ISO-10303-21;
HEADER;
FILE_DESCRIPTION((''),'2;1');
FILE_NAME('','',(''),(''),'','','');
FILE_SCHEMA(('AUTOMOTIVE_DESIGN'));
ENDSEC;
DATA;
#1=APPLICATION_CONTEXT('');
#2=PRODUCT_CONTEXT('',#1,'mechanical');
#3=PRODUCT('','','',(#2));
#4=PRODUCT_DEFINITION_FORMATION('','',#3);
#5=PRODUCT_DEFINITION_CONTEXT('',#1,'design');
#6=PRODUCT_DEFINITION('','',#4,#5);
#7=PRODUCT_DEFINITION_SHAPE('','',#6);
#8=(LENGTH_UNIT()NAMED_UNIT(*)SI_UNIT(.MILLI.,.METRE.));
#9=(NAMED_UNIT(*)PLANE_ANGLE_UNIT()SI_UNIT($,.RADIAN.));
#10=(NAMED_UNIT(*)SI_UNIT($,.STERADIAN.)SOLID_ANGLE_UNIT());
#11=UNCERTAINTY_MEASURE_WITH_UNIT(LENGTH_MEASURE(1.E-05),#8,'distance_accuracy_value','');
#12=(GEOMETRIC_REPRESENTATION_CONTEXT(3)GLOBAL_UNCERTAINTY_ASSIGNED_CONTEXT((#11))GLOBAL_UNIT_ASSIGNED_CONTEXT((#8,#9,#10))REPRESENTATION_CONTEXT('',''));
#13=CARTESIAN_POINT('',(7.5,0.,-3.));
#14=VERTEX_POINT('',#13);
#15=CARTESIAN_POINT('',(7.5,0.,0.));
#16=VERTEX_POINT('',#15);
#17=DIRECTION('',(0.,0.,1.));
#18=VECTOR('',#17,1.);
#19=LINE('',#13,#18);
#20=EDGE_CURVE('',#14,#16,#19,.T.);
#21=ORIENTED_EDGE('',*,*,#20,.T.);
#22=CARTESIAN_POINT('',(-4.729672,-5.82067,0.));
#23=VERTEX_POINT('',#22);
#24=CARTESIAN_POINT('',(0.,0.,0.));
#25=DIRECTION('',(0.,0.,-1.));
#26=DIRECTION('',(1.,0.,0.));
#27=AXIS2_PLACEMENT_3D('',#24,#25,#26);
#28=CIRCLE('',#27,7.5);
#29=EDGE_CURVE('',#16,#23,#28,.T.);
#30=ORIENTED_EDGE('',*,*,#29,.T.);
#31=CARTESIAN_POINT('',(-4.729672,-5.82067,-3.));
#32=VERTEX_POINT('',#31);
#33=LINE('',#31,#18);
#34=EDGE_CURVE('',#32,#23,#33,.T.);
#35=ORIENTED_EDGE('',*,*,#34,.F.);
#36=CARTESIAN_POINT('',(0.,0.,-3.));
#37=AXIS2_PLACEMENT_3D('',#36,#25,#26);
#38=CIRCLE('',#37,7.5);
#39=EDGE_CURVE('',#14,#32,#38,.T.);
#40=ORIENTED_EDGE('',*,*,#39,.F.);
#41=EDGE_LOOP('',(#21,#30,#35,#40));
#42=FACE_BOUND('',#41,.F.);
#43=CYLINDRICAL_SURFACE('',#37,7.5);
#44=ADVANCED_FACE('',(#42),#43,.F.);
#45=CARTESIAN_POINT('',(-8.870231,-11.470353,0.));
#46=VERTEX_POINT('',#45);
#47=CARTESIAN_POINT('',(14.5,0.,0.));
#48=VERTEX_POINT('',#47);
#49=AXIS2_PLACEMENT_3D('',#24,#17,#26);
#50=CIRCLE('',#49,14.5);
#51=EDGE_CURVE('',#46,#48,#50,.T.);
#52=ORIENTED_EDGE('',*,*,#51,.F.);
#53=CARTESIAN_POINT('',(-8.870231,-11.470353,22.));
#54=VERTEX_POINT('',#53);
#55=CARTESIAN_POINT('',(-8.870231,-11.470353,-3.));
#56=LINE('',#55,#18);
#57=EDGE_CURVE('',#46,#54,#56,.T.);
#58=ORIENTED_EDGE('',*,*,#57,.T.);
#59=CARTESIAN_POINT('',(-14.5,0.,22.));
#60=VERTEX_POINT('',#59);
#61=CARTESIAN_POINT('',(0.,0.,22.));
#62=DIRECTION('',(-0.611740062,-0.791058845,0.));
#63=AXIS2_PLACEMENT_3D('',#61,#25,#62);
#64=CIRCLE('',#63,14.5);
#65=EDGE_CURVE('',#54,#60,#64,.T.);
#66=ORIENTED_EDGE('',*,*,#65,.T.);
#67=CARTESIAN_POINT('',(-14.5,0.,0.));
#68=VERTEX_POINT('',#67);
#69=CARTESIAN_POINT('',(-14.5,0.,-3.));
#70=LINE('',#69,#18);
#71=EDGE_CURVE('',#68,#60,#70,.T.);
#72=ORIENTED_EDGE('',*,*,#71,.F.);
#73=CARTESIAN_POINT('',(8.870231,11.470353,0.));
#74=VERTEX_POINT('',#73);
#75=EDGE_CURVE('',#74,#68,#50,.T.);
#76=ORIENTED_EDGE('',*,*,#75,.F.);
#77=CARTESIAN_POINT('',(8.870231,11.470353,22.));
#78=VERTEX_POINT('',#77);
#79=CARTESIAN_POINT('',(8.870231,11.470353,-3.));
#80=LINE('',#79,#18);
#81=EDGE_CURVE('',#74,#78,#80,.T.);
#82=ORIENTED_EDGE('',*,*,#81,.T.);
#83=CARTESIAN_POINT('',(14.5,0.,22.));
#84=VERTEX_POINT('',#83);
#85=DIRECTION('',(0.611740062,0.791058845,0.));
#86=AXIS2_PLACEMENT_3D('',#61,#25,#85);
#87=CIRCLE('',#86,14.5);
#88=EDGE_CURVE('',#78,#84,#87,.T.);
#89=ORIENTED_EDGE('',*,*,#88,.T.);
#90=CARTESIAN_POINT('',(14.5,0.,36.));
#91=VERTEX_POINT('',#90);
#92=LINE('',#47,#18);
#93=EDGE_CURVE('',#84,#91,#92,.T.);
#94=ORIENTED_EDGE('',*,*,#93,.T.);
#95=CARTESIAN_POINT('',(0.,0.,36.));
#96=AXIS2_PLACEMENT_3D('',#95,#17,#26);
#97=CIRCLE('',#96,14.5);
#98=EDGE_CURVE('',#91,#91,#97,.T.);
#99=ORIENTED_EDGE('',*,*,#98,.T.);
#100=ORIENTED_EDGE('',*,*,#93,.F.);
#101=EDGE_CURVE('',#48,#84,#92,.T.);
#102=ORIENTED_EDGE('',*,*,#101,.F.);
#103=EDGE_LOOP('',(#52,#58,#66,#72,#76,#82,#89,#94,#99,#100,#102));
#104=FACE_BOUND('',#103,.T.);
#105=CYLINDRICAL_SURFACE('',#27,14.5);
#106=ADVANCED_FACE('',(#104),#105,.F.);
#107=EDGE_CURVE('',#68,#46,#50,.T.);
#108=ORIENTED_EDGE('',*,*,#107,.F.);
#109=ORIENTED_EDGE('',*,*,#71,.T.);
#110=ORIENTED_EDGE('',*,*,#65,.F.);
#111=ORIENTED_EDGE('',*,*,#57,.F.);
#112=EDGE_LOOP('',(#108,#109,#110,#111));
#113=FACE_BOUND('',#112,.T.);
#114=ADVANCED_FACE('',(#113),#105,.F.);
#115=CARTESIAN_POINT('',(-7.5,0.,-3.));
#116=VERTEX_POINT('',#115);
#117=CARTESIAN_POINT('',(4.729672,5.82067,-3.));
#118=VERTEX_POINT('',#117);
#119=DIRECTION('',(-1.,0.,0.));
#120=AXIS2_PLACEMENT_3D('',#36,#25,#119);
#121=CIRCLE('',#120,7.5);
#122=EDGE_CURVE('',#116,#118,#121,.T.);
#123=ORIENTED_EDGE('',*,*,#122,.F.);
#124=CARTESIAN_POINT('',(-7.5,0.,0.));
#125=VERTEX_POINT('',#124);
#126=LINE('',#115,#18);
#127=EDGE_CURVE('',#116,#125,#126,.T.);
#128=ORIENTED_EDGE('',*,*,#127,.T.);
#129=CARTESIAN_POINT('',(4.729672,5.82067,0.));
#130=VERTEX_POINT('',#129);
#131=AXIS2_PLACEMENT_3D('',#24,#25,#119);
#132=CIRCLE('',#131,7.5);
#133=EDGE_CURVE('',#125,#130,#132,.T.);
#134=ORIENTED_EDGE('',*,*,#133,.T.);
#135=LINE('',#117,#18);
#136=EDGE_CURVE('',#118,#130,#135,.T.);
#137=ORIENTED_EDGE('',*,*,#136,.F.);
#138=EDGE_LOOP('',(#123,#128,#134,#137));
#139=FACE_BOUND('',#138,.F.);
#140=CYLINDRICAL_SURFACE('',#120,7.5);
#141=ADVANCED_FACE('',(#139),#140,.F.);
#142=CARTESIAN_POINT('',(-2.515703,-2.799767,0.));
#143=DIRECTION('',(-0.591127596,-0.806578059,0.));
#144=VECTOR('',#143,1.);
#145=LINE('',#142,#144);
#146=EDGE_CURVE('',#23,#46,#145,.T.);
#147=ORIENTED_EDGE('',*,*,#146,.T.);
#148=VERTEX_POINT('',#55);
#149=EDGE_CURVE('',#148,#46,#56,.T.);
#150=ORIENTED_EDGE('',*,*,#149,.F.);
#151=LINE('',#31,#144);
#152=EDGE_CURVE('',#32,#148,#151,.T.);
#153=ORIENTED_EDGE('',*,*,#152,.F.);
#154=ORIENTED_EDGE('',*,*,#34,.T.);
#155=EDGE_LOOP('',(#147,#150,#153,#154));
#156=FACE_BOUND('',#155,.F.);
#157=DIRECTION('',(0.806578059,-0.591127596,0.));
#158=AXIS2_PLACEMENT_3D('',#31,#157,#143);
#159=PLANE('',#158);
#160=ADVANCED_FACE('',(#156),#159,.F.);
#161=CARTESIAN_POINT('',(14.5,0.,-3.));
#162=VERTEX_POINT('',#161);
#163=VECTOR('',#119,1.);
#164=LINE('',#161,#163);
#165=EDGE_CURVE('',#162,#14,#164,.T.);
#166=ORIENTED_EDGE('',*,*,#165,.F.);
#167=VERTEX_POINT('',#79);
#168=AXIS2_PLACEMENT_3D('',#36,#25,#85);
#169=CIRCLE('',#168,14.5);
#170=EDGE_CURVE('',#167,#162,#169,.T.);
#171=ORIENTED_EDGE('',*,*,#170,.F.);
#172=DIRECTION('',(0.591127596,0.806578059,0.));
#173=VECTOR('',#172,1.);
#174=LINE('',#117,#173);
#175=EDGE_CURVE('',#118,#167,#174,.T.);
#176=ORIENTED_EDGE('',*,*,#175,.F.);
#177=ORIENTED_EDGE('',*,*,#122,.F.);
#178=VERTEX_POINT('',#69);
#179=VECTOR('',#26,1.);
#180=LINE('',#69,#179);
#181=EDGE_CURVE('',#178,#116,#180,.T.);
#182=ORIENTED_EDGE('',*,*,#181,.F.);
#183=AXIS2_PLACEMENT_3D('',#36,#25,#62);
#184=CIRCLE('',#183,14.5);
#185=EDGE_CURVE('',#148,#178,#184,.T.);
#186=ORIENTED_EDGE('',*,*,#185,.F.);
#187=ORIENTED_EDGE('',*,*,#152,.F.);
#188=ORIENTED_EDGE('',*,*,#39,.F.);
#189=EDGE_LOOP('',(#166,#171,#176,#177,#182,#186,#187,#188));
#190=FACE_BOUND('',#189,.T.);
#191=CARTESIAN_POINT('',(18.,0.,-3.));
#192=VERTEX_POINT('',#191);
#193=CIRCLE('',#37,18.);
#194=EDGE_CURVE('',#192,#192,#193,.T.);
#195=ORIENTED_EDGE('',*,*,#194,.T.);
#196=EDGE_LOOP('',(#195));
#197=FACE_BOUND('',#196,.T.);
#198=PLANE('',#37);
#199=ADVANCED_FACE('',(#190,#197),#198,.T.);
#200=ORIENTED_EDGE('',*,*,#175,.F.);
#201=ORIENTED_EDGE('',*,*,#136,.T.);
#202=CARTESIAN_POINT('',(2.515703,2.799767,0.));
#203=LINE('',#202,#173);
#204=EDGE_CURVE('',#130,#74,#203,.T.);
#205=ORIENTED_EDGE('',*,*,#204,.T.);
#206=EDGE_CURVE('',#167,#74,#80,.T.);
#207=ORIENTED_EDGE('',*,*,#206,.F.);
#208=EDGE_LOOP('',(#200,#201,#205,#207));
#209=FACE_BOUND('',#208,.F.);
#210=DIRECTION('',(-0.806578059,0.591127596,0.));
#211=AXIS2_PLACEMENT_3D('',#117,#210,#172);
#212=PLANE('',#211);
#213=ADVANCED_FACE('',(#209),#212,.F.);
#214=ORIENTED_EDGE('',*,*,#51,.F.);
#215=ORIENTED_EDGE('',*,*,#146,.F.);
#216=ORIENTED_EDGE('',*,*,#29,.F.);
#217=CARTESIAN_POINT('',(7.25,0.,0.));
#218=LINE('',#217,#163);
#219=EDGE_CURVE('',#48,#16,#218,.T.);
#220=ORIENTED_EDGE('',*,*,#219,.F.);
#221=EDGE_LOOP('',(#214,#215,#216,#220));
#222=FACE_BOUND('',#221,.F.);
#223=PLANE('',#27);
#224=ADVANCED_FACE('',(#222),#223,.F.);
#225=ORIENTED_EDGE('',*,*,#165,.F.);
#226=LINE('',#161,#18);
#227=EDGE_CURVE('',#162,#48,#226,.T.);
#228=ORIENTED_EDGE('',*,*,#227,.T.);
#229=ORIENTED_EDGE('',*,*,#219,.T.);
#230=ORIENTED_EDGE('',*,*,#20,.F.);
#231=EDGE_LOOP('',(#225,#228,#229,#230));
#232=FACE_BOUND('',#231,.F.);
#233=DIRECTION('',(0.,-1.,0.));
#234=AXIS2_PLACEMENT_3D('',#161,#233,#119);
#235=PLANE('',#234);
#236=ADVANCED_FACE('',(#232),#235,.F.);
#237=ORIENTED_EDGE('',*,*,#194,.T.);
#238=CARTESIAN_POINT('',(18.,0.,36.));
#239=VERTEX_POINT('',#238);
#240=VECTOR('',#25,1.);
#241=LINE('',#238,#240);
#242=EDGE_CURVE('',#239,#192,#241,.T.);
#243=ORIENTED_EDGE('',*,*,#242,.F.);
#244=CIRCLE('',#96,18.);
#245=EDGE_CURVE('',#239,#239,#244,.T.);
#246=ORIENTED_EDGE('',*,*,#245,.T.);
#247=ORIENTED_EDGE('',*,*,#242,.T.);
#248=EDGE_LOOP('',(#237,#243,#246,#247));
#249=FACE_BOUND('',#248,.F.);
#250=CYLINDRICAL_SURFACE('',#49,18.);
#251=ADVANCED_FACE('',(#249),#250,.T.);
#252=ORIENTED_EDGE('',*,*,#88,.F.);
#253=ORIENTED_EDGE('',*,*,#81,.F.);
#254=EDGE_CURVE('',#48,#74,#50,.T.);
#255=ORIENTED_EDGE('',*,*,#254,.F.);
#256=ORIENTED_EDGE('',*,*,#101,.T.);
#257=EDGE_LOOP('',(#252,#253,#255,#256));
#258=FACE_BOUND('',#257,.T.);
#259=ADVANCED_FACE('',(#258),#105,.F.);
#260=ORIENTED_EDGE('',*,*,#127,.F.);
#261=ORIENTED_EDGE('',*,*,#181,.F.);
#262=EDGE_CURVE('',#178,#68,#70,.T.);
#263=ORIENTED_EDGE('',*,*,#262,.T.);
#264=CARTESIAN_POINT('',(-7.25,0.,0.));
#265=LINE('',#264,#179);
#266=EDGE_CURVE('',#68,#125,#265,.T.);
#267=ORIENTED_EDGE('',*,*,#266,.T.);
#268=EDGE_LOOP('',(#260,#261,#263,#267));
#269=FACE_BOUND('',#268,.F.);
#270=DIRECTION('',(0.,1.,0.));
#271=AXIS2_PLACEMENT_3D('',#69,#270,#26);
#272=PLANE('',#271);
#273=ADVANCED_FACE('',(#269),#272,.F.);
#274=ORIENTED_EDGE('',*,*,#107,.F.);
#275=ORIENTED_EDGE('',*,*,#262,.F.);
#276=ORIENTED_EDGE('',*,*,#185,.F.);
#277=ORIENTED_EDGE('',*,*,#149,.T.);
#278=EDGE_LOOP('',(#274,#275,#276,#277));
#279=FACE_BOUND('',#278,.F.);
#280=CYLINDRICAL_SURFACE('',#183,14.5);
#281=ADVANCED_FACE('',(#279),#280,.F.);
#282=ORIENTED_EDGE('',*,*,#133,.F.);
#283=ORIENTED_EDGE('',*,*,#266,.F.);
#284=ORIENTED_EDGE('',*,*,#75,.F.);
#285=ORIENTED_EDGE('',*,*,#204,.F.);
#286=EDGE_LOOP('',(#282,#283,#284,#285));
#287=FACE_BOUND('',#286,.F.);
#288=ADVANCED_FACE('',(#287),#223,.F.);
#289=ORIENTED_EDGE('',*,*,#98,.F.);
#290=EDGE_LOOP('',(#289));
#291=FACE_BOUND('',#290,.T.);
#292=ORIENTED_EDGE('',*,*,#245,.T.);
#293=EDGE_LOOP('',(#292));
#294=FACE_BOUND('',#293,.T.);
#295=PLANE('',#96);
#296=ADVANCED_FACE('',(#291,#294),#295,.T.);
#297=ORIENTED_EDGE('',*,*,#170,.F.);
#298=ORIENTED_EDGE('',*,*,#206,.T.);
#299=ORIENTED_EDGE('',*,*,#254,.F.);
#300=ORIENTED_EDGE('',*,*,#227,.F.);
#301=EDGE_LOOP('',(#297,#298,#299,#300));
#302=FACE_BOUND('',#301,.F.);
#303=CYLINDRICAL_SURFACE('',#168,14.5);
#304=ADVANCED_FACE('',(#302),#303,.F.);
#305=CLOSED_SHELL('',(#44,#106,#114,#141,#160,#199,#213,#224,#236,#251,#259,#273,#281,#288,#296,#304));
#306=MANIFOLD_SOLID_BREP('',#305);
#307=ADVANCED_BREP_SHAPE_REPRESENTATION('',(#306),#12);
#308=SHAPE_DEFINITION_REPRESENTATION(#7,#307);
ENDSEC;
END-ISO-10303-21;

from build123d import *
from build123d import SkipClean  # not in build123d's __all__

# Parameters (mm, degrees)
F0_R     = 18
F0_R_2   = 14.5
F1_DEPTH = 36
F2_R     = 18
F3_DEPTH = 3
F5_DEPTH = 25


with BuildPart() as f1:
    # F0 (on Top) → F1 (new body)
    with BuildSketch(Plane.XY):
        Circle(F0_R)
        Circle(F0_R_2, mode=Mode.SUBTRACT)
    extrude(amount=F1_DEPTH)

    # F2 (on face) → F3 (join)
    with BuildSketch(Plane(origin=(0, 0, 0), x_dir=(1, 0, 0), z_dir=(0, 0, -1))):
        Circle(F2_R)
    extrude(amount=F3_DEPTH)

    # F4 (on face) → F5 (cut)
    with BuildSketch(Plane(origin=(0, 0, -3), x_dir=(1, 0, 0), z_dir=(0, 0, -1))):
        with BuildLine():
            Line((-4.7296723619, 5.8206700086), (-8.8702309022, 11.4703532527))
            ThreePointArc((-8.8702309022, 11.4703532527), (-13.0166882901, 6.388726474), (-14.5, 0))
            Line((-14.5, 0), (-7.5, 0))
            ThreePointArc((-7.5, 0), (-6.7720950493, 3.2231550758), (-4.7296723619, 5.8206700086))
        make_face()
        with BuildLine():
            ThreePointArc((7.5, 0), (3.2231550758, 6.7720950493), (-4.7296723619, 5.8206700086))
            ThreePointArc((-4.7296723619, 5.8206700086), (-6.7720950493, 3.2231550758), (-7.5, 0))
            ThreePointArc((-7.5, 0), (-3.2231550758, -6.7720950493), (4.7296723619, -5.8206700086))
            ThreePointArc((4.7296723619, -5.8206700086), (6.7720950493, -3.2231550758), (7.5, 0))
        make_face()
        with BuildLine():
            Line((14.5, 0), (7.5, 0))
            ThreePointArc((7.5, 0), (6.7720950493, -3.2231550758), (4.7296723619, -5.8206700086))
            Line((4.7296723619, -5.8206700086), (8.8702309022, -11.4703532527))
            ThreePointArc((8.8702309022, -11.4703532527), (13.0166882901, -6.388726474), (14.5, 0))
        make_face()
    with SkipClean():  # cleaning this boolean's faces spoils the solid; the shape is the same uncleaned
        extrude(amount=-F5_DEPTH, mode=Mode.SUBTRACT)


solid = f1.part
